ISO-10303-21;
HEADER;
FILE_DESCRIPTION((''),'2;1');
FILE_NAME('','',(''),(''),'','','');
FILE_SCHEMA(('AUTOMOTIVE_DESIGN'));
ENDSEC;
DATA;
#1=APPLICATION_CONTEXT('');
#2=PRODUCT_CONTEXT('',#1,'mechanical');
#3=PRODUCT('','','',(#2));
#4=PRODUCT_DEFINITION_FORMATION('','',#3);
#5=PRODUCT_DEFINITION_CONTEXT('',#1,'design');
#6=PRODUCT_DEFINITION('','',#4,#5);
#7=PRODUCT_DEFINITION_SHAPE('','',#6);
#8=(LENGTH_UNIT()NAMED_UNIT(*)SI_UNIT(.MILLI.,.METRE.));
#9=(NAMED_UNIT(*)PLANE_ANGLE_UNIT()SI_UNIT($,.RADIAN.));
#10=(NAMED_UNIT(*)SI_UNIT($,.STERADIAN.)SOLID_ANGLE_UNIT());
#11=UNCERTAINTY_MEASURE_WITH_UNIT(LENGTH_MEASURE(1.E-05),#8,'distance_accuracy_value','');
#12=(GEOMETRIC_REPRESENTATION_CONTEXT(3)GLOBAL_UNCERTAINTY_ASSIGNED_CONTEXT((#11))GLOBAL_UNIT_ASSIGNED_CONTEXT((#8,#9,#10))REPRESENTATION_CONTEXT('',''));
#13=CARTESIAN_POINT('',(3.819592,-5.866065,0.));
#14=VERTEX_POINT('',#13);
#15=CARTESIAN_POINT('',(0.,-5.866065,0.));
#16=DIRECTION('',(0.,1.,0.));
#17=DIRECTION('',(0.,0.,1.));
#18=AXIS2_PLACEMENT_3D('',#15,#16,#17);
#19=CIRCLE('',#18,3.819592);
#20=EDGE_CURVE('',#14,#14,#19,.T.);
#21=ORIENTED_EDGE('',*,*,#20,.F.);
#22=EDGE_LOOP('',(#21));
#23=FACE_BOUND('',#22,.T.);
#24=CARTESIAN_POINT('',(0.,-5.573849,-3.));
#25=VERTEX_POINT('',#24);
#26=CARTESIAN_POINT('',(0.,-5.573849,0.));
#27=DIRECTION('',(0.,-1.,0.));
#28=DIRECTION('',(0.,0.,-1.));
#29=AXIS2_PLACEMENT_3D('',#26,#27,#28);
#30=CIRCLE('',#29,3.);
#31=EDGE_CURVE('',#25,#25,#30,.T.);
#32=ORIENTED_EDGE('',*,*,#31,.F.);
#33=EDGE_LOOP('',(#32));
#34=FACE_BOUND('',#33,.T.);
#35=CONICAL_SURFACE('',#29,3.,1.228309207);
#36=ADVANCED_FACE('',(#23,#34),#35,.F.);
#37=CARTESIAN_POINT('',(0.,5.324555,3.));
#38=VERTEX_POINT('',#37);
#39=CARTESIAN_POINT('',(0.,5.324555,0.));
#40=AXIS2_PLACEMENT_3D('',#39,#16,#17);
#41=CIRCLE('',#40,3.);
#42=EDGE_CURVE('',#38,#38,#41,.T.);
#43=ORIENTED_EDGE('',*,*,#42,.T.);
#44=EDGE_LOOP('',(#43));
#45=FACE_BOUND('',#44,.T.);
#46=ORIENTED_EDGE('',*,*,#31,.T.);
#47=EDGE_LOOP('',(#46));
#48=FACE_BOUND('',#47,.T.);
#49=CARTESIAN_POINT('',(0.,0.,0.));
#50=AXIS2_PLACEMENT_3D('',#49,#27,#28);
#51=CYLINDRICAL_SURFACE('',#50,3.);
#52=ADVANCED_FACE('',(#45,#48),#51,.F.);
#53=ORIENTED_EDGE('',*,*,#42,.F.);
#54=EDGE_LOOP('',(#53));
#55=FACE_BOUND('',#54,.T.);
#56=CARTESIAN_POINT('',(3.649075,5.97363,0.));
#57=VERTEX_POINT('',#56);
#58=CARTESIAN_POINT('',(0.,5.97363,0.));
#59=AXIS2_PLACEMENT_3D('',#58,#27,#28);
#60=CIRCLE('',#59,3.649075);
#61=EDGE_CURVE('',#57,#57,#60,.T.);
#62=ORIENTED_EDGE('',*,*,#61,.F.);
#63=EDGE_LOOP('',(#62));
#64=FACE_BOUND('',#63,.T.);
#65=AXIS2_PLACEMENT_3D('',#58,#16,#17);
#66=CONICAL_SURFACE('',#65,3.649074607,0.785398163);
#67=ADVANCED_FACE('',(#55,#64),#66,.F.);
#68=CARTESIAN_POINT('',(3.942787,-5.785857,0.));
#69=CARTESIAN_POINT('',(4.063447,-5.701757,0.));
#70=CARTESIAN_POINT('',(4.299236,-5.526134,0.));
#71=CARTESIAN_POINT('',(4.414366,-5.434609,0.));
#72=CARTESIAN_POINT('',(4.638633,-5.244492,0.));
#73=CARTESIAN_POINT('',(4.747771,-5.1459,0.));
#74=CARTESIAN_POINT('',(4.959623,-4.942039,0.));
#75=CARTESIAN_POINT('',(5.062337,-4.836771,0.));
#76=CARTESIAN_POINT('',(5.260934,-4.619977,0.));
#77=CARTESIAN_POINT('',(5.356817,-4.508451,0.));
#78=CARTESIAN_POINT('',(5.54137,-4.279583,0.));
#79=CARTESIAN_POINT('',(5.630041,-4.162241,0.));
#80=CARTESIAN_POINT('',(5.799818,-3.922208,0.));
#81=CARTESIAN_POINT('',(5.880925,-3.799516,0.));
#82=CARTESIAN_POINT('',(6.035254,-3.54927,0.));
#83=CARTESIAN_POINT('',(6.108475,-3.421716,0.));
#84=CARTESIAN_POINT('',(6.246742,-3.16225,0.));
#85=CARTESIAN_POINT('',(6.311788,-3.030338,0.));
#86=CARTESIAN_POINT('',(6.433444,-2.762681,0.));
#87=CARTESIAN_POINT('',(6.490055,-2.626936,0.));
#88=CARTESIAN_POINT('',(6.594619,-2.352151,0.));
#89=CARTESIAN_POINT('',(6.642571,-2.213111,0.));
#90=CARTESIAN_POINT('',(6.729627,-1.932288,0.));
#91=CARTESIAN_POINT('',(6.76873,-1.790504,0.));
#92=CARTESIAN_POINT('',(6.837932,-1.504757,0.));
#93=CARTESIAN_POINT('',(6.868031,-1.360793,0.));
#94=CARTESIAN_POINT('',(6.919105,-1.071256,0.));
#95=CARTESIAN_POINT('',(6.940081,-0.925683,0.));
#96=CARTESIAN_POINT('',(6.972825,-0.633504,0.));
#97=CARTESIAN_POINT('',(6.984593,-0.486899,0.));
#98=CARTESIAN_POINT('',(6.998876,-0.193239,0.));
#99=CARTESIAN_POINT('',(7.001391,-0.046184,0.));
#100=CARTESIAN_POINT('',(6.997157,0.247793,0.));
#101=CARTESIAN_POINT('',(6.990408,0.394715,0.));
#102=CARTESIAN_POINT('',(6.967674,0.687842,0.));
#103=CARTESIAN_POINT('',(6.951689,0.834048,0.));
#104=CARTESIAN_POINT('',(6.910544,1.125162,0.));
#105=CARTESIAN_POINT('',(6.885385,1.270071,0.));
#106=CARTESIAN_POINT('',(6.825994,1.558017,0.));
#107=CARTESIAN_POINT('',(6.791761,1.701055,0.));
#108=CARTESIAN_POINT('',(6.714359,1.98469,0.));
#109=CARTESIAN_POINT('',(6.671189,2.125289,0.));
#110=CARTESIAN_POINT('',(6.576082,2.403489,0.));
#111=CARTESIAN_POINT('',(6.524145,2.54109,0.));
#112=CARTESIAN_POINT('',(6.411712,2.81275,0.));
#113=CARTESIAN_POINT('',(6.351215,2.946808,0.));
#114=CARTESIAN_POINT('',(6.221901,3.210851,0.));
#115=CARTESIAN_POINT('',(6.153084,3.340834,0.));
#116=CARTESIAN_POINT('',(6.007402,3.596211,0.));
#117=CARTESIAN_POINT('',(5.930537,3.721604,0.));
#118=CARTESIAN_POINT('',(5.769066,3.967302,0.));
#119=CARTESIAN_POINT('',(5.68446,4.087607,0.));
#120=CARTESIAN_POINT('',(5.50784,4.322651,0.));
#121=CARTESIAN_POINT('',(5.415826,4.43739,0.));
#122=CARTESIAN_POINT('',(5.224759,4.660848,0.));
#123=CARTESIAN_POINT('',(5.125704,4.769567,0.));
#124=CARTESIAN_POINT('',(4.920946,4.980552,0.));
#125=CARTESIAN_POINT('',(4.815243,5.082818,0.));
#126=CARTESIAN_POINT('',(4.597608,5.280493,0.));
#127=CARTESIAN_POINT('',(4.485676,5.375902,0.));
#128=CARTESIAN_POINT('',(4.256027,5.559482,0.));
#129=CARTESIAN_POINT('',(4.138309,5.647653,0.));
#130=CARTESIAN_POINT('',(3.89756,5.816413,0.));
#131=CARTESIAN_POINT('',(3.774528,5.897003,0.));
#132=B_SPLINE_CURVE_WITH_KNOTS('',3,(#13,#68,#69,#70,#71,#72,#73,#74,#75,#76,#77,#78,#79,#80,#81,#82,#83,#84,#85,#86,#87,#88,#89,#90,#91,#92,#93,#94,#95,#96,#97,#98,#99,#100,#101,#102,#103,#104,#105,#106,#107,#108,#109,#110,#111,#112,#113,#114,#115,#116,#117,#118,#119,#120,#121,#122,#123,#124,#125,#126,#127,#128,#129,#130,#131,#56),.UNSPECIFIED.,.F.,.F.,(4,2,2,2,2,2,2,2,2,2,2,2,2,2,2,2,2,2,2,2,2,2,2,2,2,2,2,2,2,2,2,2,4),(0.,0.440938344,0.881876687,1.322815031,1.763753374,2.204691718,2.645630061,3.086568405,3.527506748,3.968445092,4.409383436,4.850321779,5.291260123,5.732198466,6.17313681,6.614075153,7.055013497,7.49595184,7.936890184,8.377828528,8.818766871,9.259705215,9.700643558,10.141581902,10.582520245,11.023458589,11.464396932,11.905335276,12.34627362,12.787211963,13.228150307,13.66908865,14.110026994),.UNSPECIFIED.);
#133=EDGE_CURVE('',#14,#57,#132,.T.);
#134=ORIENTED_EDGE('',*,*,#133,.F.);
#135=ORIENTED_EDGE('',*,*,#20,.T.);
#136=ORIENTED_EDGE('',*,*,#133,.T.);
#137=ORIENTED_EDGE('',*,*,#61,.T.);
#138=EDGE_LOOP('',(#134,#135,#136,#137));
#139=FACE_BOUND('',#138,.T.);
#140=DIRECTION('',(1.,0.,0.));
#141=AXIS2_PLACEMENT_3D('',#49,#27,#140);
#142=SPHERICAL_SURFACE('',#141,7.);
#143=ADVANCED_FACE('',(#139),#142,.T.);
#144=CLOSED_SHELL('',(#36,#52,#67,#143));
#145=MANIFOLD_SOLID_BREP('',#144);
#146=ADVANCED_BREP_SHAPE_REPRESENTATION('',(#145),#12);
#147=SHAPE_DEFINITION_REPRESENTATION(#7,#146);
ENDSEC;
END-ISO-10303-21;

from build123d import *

# Parameters (mm, degrees)
CHAMFER1_SIZE   = 1
CHAMFER1_SIZE_2 = 0.75070604


with BuildPart() as part:
    # Sketch1 → Revolve1 (revolve)
    with BuildSketch(Plane.XY):
        with BuildLine():
            ThreePointArc((7, 0), (5.916079783, 3.741657387), (3, 6.32455532))
            Line((3, 6.32455532), (3, -6.32455532))
            ThreePointArc((3, -6.32455532), (5.916079783, -3.741657387), (7, 0))
        make_face()
    revolve(axis=Axis((0, 0, 0), (0, 1, 0)))

    # Chamfer1
    # the kernel refuses this chamfer: 1, 0.75070604 mm, written as the material it takes off along each edge
    with BuildSketch(Plane(origin=(0, 6.32455532, 0), x_dir=(1, 0, 0), z_dir=(0, 0, 1))) as chamfer1_piece_1:
        with BuildLine():
            Line((3.649074607, -0.350925393), (3, -CHAMFER1_SIZE))
            Line((3, -CHAMFER1_SIZE), (3, 0))
            ThreePointArc((3, 0), (3.334183259, -0.169620553), (3.649074607, -0.350925393))
        make_face()
    revolve(axis=Axis((0, 6.32455532, 0), (0, 1, 0)), mode=Mode.SUBTRACT)
    with BuildSketch(Plane(origin=(0, -6.32455532, 0), x_dir=(1, 0, 0), z_dir=(0, 0, 1))) as chamfer1_piece_2:
        with BuildLine():
            Line((3.819592149, 0.458490557), (3, CHAMFER1_SIZE_2))
            Line((3, CHAMFER1_SIZE_2), (3, 0))
            ThreePointArc((3, 0), (3.428975196, 0.221922355), (3.819592149, 0.458490557))
        make_face()
    revolve(axis=Axis((0, -6.32455532, 0), (0, 1, 0)), mode=Mode.SUBTRACT)


solid = part.part
